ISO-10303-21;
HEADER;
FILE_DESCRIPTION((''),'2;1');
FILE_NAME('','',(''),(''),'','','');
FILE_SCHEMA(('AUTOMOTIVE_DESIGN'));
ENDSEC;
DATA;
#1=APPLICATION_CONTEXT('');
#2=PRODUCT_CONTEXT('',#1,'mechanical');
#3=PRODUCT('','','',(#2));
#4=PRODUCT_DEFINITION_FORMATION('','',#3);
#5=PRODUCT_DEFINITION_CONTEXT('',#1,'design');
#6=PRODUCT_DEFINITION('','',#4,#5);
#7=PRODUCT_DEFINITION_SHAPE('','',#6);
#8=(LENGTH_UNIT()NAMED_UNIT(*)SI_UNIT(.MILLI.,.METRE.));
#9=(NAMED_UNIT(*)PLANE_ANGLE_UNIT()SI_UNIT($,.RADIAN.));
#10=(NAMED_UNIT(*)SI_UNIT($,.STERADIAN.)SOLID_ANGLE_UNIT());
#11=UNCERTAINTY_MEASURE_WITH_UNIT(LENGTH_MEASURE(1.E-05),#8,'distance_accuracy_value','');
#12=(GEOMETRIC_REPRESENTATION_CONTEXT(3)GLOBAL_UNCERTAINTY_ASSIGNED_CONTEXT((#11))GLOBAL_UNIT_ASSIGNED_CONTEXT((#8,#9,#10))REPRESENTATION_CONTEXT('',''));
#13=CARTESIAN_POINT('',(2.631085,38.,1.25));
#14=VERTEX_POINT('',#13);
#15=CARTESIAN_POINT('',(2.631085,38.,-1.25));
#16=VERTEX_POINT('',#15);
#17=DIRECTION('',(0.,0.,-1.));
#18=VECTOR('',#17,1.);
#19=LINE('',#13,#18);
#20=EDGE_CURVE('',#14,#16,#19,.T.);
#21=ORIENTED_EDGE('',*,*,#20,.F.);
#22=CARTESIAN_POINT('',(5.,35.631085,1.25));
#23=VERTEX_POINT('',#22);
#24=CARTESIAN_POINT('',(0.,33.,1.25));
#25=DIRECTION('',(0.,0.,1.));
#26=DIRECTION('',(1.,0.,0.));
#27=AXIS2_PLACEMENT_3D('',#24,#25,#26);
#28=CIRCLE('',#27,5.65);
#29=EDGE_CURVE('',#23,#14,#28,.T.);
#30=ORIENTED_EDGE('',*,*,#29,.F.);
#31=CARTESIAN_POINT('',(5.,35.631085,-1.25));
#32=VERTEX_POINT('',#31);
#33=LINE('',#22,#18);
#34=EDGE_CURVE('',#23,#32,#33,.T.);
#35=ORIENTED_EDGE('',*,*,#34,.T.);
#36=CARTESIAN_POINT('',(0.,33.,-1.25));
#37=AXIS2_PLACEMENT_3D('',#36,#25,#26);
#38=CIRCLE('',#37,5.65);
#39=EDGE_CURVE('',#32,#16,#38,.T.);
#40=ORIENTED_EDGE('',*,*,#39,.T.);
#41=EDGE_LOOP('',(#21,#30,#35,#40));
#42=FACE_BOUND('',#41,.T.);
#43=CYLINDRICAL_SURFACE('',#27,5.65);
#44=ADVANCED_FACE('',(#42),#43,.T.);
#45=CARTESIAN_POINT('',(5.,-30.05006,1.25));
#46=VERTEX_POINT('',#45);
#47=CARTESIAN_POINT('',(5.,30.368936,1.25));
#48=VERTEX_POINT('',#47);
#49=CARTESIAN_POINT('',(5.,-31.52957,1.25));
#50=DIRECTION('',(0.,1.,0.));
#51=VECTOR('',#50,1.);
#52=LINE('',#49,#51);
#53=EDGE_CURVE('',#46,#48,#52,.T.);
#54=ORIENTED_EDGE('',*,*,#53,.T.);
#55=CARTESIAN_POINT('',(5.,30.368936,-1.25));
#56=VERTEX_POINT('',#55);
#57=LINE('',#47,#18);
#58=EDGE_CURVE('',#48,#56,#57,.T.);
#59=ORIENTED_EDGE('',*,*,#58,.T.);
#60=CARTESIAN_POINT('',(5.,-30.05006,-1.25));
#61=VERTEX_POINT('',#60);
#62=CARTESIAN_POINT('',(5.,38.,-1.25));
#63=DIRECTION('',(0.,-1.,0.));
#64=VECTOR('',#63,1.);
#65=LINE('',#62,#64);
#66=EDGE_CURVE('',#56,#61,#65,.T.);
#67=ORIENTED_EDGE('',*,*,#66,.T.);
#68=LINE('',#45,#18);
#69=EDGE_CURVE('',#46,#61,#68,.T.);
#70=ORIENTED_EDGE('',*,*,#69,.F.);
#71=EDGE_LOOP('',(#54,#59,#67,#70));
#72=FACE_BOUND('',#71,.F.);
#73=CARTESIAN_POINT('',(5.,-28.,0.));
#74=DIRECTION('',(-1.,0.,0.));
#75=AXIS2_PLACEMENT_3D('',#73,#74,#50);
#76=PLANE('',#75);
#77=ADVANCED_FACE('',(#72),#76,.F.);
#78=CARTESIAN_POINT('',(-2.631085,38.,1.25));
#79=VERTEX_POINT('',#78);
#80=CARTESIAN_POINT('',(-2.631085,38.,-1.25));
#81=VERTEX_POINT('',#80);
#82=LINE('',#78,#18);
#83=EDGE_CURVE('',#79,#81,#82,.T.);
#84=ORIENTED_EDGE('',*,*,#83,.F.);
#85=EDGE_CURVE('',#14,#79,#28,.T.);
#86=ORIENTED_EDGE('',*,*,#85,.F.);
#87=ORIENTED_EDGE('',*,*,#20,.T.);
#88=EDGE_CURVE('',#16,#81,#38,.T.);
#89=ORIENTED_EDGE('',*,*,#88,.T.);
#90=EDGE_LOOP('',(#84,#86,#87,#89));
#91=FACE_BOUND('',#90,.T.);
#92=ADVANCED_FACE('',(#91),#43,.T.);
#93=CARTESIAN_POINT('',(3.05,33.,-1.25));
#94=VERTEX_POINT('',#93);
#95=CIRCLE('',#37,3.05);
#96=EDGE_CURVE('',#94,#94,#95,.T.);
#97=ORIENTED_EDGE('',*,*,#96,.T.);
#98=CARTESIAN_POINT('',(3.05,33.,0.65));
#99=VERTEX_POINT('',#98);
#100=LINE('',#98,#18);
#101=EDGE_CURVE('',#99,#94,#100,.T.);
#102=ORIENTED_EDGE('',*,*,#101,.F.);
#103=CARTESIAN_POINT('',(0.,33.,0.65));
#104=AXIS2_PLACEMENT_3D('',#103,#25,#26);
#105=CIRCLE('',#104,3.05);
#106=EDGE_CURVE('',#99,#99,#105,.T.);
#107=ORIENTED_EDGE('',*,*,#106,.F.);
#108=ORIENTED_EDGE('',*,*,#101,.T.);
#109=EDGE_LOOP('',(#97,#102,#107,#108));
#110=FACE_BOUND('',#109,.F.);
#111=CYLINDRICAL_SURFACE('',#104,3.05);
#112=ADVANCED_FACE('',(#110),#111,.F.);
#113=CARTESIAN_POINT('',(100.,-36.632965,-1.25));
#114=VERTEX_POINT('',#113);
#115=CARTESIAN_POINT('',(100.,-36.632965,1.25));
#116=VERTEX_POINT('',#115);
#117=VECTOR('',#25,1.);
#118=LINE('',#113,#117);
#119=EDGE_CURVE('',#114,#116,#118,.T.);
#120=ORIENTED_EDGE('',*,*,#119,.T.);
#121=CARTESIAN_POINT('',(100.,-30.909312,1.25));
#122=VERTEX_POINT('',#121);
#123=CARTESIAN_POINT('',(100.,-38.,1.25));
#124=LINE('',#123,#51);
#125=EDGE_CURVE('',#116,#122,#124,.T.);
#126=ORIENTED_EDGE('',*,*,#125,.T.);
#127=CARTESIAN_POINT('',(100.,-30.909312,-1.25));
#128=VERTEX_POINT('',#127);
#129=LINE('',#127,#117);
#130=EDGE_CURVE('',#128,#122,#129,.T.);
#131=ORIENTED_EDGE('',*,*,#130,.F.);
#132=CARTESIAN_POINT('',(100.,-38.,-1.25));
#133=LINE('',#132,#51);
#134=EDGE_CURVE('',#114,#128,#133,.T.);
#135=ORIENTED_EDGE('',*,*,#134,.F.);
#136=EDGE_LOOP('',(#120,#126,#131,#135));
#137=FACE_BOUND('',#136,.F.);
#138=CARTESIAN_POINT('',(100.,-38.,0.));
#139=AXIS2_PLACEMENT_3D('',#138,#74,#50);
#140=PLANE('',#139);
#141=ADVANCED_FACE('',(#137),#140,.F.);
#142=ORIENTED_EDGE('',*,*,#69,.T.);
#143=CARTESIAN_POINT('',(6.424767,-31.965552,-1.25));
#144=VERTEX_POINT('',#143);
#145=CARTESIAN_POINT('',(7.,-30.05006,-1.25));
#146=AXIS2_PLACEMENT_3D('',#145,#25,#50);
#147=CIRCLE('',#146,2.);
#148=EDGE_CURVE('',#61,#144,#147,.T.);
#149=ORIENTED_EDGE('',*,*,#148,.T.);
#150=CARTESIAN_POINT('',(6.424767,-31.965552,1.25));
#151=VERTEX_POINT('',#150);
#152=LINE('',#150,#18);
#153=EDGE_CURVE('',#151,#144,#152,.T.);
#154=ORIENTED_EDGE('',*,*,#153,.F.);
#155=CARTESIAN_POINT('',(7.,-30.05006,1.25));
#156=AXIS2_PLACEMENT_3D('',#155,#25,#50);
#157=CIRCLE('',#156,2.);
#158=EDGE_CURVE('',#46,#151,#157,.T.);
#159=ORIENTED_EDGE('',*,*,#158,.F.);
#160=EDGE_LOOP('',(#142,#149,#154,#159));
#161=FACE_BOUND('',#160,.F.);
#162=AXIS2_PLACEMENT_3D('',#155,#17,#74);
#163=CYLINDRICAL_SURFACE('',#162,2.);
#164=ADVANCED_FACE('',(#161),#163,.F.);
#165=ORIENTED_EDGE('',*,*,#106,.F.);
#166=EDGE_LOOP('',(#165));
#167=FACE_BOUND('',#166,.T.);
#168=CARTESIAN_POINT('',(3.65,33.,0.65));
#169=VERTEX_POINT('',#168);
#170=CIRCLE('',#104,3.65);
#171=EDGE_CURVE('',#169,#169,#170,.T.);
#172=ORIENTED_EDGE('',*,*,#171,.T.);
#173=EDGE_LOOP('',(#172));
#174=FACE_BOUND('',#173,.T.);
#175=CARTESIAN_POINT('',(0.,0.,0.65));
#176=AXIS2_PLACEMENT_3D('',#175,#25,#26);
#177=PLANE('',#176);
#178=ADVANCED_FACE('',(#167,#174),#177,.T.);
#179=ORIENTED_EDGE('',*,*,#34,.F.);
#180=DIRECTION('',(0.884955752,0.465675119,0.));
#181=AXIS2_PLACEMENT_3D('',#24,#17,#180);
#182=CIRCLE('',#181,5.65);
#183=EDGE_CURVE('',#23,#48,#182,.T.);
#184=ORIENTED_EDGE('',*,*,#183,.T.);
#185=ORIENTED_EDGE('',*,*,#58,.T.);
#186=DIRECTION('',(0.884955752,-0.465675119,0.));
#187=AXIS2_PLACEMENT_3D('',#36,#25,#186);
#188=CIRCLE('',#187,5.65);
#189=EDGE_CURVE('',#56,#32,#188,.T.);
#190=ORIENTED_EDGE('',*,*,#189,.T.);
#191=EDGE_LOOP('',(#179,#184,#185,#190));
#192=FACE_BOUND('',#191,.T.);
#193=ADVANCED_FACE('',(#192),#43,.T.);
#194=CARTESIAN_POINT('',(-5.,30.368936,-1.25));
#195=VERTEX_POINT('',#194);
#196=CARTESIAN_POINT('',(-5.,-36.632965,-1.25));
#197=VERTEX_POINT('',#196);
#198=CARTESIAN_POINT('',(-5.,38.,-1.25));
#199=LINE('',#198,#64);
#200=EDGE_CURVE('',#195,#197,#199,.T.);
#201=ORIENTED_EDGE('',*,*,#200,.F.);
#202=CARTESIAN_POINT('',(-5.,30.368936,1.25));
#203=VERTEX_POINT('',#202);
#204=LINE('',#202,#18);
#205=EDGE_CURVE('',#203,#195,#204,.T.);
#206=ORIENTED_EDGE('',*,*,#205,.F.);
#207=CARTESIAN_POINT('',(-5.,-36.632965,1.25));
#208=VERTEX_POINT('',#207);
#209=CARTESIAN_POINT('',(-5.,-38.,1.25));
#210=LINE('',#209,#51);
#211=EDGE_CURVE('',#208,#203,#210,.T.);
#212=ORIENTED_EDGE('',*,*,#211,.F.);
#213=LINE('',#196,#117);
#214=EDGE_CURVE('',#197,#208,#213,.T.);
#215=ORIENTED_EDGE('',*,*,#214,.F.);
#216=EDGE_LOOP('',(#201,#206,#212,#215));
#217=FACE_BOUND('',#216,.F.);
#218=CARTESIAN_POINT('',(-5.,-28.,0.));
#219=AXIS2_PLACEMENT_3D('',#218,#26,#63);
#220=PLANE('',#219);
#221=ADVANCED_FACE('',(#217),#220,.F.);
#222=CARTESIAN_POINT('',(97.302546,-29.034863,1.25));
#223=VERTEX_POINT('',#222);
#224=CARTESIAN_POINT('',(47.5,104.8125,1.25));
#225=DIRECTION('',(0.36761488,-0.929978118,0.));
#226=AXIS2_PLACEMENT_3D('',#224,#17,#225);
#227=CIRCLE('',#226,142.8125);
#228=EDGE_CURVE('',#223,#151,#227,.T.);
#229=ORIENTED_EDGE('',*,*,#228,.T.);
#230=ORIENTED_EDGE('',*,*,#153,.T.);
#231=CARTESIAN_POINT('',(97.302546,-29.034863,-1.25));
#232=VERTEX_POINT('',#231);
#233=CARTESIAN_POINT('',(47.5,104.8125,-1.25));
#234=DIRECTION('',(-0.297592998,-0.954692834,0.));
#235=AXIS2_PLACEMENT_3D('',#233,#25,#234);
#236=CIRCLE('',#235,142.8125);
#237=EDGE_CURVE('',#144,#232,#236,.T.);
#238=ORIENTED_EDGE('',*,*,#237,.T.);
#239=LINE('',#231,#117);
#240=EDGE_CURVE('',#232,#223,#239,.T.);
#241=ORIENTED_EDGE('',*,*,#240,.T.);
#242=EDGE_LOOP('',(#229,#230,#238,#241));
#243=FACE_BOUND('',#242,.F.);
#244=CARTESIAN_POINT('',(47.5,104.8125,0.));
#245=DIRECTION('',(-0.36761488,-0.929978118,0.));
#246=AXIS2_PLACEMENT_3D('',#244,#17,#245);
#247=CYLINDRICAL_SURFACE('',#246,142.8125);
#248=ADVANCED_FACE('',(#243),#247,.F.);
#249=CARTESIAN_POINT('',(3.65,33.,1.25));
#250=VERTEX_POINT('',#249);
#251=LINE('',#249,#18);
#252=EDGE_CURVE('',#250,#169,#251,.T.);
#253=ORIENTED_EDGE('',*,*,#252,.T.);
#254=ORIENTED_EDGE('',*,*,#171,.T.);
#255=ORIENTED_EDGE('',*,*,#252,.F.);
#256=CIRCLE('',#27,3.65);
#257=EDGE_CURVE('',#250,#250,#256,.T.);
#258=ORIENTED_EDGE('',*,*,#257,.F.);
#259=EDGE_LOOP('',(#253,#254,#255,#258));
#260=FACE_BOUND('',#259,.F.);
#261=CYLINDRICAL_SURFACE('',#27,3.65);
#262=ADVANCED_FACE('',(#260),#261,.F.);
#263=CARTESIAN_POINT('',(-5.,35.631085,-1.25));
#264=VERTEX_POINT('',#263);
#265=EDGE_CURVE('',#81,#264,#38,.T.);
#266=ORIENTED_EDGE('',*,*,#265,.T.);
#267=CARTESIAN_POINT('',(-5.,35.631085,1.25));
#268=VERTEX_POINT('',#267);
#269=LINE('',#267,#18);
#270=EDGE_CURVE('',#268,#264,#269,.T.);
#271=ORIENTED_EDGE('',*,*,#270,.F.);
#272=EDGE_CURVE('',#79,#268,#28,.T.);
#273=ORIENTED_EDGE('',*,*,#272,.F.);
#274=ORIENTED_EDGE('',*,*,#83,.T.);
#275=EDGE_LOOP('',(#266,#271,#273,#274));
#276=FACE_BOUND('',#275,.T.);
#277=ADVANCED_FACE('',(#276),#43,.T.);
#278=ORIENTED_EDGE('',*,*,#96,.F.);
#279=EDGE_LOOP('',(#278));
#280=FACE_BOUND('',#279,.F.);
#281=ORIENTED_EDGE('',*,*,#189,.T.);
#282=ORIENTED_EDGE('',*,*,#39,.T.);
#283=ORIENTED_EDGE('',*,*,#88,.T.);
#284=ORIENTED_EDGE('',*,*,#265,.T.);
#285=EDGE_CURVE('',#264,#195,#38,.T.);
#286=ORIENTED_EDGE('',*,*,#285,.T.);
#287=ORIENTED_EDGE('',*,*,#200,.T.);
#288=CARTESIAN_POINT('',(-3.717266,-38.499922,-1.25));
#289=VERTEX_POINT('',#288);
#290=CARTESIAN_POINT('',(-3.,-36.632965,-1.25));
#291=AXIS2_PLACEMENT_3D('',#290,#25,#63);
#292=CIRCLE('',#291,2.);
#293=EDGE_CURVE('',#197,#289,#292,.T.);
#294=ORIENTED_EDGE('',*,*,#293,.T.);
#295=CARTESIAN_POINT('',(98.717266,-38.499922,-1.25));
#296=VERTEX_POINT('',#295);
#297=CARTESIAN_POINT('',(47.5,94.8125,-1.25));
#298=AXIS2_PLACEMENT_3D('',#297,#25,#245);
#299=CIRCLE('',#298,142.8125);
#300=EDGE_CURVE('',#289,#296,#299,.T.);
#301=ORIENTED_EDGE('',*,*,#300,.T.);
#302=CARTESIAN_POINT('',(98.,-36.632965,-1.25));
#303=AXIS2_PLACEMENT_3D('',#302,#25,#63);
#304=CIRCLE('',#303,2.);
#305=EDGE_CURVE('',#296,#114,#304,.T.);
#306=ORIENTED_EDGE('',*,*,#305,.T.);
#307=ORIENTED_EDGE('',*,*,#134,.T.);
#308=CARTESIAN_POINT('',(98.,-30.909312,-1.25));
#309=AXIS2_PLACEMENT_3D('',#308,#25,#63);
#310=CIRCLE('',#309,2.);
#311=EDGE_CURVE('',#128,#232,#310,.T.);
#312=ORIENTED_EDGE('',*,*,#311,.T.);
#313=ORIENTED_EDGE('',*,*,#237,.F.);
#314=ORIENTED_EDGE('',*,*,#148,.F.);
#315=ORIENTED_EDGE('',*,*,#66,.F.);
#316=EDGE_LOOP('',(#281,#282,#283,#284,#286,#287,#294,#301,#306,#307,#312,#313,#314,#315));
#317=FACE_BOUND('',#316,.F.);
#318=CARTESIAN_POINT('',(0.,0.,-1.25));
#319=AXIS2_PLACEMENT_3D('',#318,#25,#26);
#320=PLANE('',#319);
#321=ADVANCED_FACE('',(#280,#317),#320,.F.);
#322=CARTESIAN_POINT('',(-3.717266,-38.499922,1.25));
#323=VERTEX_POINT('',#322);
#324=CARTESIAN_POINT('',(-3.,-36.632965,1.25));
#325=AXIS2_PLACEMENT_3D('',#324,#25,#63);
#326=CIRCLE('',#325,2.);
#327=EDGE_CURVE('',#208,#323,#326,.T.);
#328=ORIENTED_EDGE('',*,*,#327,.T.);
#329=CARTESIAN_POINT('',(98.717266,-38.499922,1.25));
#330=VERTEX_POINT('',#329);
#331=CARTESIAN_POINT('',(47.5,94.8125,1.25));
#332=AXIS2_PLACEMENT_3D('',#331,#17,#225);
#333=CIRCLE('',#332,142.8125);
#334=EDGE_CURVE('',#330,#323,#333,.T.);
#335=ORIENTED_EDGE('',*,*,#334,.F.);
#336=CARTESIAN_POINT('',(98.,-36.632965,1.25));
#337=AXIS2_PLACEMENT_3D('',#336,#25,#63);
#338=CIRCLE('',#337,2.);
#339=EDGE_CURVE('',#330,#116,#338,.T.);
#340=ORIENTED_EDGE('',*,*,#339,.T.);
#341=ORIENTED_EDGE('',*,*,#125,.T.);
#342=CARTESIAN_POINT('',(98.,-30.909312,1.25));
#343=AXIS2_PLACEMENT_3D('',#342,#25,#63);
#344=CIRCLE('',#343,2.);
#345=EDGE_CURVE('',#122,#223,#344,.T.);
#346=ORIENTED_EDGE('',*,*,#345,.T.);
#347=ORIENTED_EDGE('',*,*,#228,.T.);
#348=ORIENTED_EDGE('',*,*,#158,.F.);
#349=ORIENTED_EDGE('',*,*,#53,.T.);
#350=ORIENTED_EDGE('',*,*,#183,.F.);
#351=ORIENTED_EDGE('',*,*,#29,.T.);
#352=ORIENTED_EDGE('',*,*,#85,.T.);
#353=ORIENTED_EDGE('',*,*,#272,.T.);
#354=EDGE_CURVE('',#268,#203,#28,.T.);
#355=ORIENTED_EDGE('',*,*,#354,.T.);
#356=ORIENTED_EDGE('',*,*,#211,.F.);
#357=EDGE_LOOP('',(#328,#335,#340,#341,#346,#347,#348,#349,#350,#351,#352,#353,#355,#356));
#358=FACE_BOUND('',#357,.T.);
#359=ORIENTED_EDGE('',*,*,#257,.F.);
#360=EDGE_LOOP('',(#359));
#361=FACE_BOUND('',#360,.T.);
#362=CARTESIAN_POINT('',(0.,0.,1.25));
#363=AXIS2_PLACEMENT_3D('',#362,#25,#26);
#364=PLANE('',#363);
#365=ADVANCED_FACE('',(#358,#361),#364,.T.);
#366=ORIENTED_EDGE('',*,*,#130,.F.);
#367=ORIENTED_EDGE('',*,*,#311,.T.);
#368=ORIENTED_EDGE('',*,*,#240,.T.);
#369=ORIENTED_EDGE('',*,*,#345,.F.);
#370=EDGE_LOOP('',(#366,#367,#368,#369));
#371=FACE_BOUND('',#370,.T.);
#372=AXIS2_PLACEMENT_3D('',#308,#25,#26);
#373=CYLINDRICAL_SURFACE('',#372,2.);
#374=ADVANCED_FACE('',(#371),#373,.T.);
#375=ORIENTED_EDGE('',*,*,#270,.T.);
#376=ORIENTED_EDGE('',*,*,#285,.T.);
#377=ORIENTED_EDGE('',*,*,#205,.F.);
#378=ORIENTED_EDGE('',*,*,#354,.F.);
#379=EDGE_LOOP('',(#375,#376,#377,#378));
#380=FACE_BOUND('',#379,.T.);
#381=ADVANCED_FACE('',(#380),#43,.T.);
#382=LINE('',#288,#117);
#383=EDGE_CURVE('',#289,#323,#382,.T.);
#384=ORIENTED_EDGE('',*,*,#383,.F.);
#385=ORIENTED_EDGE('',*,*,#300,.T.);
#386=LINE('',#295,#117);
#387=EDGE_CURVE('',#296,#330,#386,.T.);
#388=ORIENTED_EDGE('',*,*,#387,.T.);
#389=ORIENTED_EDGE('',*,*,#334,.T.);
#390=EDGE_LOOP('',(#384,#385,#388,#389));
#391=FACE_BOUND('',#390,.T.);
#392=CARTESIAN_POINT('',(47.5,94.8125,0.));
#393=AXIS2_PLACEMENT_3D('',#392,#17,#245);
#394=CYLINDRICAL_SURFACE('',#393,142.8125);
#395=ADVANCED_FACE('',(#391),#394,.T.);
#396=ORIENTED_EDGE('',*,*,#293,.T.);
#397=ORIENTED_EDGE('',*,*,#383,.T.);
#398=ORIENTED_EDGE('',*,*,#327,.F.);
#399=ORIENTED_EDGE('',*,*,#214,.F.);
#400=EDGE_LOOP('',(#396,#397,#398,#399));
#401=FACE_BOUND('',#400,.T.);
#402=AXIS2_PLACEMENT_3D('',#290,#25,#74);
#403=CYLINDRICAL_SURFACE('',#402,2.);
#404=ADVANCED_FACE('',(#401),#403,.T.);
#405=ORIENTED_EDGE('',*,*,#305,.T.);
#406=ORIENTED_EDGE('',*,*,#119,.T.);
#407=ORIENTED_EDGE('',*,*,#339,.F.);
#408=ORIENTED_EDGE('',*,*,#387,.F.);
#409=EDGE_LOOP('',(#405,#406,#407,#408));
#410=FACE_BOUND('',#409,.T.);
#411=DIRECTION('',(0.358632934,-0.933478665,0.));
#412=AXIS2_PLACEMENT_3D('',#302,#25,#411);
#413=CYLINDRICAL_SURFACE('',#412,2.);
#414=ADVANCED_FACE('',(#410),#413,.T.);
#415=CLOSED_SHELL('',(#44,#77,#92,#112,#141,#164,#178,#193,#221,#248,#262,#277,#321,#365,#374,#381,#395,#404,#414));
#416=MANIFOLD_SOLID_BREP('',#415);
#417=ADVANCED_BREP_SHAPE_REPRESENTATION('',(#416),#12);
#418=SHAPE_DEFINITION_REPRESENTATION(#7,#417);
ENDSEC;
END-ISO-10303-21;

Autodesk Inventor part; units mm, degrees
ref_plane "YZ Plane" through (0, 0, 0) normal (1, 0, 0) x (0, 1, 0)
ref_plane "XZ Plane" through (0, 0, 0) normal (0, 1, 0) x (-1, 0, 0)
ref_plane "XY Plane" through (0, 0, 0) normal (0, 0, 1) x (1, 0, 0)
sketch "スケッチ1" plane through (0, 0, 0) normal (0, 0, 1) x (1, 0, 0)
  line L0 (-5, -38) -> (5, -38)
  line L1 (5, -38) -> (5, 38)
  line L2 (5, 38) -> (-5, 38)
  line L3 (-5, 38) -> (-5, -38)
  line L4 (-5, -38) -> (5, 38) construction
  line L5 (5, -38) -> (-5, 38) construction
  line L6 (-5, -38) -> (100, -38)
  line L7 (100, -38) -> (100, -28)
  line L8 (100, -28) -> (-5, -28)
  line L9 (-5, -28) -> (-5, -38)
  line L10 (47.5, -38) -> (47.5, -48)
  arc A0 (-5, -28) -> (100, -28) centre (47.5, 104.8125) ccw
  arc A1 (-5, -38) -> (100, -38) centre (47.5, 94.8125) ccw
  point P0 (0, 0)
  point P1 (5, -31.5296)
  dimension "d0" = 10
  dimension "d1" = 76
  dimension "d2" = 105
  dimension "d3" = 10
  dimension "d4" = 10
extrude "押し出し1" add sketch "スケッチ1" along normal mid plane 2.5 contours L3 A0 L1 L0 | L0 L6 L10 A1 | L1 A0 L6 | L3 L2 L1 L8 | L8 L1 A0 | L10 L6 A1 | A0 L7 L6 picked at (-0.5654, -28.4196)
sketch "スケッチ2" plane through (0, 0, 1.25) normal (0, 0, 1) x (1, 0, 0)
  line L0 (5, 38) -> (-5, 38) projected
  line L1 (5, -31.5296) -> (5, 38) projected
  circle A0 centre (0, 33) radius 3.05
  circle A1 centre (0, 33) radius 3.65
  point P0 (0, 0)
  dimension "d7" = 5
  dimension "d8" = 5
  dimension "d9" = 6.1
  dimension "d10" = 7.3
extrude "押し出し2" cut sketch "スケッチ2" against normal blind 0.6 contours A0 | A1
sketch "スケッチ3" plane through (0, 33, 0.65) normal (0, 0, 1) x (1, 0, 0)
  circle A0 centre (0, 0) radius 3.05
  point P0 (0, -33)
  dimension "d13" = 6.1
extrude "押し出し3" cut sketch "スケッチ3" against normal blind 1.9
sketch "スケッチ6" plane through (0, 0, 1.25) normal (0, 0, 1) x (1, 0, 0)
  circle A0 centre (0, 33) radius 3.65 projected
  line L0 (-5, 38) -> (-5, -38) projected
  arc A1 (-5, -38) -> (100, -38) centre (47.5, 94.8125) ccw projected
  line L1 (100, -38) -> (100, -28) projected
  arc A2 (5, -31.5296) -> (100, -28) centre (47.5, 104.8125) ccw projected
  line L2 (5, -31.5296) -> (5, 38) projected
  line L3 (5, 38) -> (-5, 38) projected
  circle A3 centre (0, 33) radius 5.65
  point P0 (0, 0)
  point P1 (-5, 30.3689)
  point P2 (-5, 35.6311)
  point P3 (-2.6311, 38)
  point P4 (2.6311, 38)
  point P5 (5, 35.6311)
  point P6 (5, 30.3689)
  dimension "d18" = 11.3
extrude "押し出し5" add sketch "スケッチ6" against normal blind 2.5 contours L0 A3 | A3 L3 | L2 A3
sketch "スケッチ7" plane through (0, 0, 1.25) normal (0, 0, 1) x (1, 0, 0)
  circle A0 centre (0, 33) radius 3.65 projected
  line L0 (-5, 38) -> (-5, 35.6311) projected
  arc A1 (-5, 35.6311) -> (-5, 30.3689) centre (0, 33) ccw projected
  line L1 (-5, 30.3689) -> (-5, -38) projected
  arc A2 (-5, -38) -> (100, -38) centre (47.5, 94.8125) ccw projected
  line L2 (100, -38) -> (100, -28) projected
  arc A3 (5, -31.5296) -> (100, -28) centre (47.5, 104.8125) ccw projected
  line L3 (5, -31.5296) -> (5, 30.3689) projected
  arc A4 (5, 30.3689) -> (5, 35.6311) centre (0, 33) ccw projected
  line L4 (5, 35.6311) -> (5, 38) projected
  line L5 (5, 38) -> (2.6311, 38) projected
  arc A5 (2.6311, 38) -> (-2.6311, 38) centre (0, 33) ccw projected
  line L6 (-2.6311, 38) -> (-5, 38) projected
  circle A6 centre (0, 33) radius 5.65
  point P0 (0, 0)
  point P1 (-5, 35.6311)
  point P2 (-2.6311, 38)
  point P3 (2.6311, 38)
  point P4 (5, 35.6311)
extrude "押し出し6" cut sketch "スケッチ7" against normal blind 2.5 contours L6 A6 L0 | L5 L4 A6
fillet "フィレット1" radius 2 4 edges at (-5, -38, 0) (5, -31.5296, 0) (100, -28, 0) (100, -38, 0)
properties part number "指_大"
